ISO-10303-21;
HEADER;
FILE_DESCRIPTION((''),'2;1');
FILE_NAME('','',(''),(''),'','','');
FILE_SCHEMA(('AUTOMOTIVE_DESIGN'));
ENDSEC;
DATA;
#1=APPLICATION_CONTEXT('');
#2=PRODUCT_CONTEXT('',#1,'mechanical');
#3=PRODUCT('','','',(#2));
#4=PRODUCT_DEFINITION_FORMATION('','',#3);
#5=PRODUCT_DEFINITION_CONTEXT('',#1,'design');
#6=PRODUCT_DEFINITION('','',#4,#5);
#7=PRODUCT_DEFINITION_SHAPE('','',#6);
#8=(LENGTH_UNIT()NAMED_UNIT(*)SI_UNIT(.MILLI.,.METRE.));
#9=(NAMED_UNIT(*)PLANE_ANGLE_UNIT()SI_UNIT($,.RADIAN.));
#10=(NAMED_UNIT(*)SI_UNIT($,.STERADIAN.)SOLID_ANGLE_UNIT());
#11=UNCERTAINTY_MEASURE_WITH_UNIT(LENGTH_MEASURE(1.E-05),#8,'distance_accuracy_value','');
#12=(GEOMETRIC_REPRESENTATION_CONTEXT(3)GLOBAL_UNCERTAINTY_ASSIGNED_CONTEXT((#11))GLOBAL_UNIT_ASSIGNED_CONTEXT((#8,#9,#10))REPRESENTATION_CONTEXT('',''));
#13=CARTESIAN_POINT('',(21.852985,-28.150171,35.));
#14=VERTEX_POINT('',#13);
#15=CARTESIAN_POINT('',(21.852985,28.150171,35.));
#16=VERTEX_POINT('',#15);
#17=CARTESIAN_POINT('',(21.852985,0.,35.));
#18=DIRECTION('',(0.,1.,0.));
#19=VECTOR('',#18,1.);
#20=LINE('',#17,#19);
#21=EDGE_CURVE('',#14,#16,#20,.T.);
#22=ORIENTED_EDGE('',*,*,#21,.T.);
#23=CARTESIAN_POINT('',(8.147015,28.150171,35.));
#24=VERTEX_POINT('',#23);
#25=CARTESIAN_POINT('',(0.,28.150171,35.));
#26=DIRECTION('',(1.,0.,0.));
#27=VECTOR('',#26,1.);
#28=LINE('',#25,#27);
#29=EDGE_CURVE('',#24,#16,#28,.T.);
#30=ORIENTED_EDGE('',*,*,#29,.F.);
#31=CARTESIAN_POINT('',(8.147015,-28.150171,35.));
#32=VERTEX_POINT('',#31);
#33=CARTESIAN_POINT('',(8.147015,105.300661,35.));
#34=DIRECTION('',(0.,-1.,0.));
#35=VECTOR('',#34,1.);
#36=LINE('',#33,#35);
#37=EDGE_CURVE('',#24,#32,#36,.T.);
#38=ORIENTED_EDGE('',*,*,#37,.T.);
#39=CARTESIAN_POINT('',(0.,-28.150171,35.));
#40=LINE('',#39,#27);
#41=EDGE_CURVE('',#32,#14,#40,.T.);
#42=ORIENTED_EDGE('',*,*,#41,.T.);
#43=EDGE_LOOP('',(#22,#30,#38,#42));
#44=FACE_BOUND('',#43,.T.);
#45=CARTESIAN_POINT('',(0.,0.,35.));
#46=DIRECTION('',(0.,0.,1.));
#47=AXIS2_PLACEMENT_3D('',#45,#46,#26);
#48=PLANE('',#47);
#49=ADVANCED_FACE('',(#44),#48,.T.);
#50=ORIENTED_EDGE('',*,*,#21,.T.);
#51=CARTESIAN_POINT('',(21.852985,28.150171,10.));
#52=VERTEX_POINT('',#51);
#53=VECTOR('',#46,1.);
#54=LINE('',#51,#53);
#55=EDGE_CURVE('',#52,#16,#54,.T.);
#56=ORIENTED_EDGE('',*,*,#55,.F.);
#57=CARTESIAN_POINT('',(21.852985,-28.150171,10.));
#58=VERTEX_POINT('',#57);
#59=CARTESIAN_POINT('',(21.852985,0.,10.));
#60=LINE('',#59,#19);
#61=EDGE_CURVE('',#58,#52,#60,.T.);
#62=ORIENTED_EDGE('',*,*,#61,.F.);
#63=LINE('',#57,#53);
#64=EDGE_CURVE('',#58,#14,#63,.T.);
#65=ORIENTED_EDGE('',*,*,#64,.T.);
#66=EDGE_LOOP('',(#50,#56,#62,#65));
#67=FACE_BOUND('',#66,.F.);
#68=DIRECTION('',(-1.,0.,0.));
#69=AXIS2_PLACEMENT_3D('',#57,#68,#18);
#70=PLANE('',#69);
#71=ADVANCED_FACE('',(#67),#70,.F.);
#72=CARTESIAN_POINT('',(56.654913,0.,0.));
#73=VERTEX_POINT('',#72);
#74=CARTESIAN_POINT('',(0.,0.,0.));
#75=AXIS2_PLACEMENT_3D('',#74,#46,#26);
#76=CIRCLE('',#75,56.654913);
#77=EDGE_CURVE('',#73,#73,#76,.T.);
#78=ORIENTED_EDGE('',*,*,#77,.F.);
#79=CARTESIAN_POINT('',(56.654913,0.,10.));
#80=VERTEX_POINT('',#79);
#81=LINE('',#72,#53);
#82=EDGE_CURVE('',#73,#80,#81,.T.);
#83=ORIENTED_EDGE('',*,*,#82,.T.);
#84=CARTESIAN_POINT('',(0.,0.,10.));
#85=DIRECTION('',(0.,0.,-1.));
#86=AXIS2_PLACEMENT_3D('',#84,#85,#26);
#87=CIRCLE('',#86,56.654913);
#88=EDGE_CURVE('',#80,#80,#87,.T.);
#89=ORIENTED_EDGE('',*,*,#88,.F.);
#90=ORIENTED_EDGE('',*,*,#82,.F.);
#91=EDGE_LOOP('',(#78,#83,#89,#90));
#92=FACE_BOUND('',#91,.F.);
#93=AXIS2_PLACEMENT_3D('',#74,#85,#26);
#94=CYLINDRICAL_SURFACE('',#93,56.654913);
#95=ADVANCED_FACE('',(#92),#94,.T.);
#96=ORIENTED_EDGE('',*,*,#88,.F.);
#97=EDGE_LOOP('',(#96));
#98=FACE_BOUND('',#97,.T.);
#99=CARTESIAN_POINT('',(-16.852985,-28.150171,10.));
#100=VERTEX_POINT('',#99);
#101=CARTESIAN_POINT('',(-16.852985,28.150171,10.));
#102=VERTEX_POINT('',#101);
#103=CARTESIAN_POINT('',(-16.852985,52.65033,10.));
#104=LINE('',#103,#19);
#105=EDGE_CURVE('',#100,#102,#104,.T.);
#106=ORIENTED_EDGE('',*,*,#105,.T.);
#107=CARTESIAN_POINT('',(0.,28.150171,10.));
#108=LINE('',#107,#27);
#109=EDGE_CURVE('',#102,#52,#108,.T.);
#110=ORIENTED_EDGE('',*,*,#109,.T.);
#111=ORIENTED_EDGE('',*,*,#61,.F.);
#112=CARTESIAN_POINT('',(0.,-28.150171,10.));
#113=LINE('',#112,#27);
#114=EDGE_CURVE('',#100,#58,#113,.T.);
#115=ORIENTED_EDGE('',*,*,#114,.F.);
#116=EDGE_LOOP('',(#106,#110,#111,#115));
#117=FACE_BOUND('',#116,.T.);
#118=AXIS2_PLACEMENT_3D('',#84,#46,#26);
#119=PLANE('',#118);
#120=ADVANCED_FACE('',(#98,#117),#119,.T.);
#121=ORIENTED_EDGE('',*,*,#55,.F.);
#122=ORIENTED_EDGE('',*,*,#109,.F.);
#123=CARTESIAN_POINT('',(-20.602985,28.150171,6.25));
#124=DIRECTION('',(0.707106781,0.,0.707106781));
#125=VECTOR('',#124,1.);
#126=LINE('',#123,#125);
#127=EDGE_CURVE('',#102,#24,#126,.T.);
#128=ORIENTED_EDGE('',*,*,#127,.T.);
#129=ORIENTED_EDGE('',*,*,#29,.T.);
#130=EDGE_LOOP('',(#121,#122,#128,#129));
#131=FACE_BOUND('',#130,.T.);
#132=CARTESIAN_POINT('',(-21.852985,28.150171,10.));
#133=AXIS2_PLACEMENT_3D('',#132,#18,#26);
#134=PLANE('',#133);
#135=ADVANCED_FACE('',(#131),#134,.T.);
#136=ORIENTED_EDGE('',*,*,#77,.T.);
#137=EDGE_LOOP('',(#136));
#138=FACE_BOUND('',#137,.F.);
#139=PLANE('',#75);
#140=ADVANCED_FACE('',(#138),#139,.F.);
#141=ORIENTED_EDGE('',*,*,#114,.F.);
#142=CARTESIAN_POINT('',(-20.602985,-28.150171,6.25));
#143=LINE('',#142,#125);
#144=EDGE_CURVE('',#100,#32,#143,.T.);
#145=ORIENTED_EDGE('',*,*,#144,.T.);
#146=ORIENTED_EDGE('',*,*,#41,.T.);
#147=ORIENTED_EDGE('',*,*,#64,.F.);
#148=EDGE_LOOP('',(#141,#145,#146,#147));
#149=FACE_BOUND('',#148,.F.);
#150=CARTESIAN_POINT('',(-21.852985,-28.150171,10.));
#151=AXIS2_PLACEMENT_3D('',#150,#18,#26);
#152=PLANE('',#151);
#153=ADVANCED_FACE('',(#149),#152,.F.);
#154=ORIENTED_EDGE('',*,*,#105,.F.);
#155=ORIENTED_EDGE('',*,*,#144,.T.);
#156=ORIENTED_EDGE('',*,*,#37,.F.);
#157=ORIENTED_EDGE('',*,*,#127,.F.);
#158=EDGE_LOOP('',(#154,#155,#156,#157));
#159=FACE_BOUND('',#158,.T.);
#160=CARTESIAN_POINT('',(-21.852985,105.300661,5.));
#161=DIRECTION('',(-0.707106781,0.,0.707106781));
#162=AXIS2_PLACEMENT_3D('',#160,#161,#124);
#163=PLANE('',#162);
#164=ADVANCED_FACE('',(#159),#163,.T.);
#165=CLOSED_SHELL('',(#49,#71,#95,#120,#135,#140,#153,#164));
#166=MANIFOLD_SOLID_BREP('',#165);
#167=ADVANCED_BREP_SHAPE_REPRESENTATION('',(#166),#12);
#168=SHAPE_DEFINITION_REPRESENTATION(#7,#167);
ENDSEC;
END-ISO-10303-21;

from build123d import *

# Parameters (mm, degrees)
F0_R        = 56.6549127416
F1_DEPTH    = 10
F2_W        = 43.7059700489
F2_H        = 56.300342083
F3_DEPTH    = 25
F4_T4_DEPTH = 210.6013213609


# Not quite as in the source:
# - a fillet or chamfer that OpenCascade refuses, or shapes differently, is made with other operations: its cross-section is extruded or revolved along the edge and cut away or added


with BuildPart() as f1:
    # F0 (on Top) → F1 (new body)
    with BuildSketch(Plane.XY):
        Circle(F0_R)
    extrude(amount=F1_DEPTH)

    # F2 (on face) → F3 (join)
    with BuildSketch(Plane.XY.offset(10)):
        Rectangle(F2_W, F2_H)
    extrude(amount=F3_DEPTH)

    # F4: chamfer of 30 on 1 edges, made by hand


with BuildPart() as f4_tool2:
    # F4_s3 → F4_t4 (new body)
    with BuildSketch(Plane.XZ.offset(-105.3006606805)):
        Polygon((-21.8529850245, 5), (8.1470149755, 35), (-21.8529850245, 35), align=None)
    extrude(amount=F4_T4_DEPTH)

    split(bisect_by=Plane.XY.offset(10), keep=Keep.TOP)


with BuildPart() as f1_1:
    add(f1.part)

    # F4_t1: cut F4_tool2
    add(f4_tool2.part, mode=Mode.SUBTRACT)


solid = f1_1.part
